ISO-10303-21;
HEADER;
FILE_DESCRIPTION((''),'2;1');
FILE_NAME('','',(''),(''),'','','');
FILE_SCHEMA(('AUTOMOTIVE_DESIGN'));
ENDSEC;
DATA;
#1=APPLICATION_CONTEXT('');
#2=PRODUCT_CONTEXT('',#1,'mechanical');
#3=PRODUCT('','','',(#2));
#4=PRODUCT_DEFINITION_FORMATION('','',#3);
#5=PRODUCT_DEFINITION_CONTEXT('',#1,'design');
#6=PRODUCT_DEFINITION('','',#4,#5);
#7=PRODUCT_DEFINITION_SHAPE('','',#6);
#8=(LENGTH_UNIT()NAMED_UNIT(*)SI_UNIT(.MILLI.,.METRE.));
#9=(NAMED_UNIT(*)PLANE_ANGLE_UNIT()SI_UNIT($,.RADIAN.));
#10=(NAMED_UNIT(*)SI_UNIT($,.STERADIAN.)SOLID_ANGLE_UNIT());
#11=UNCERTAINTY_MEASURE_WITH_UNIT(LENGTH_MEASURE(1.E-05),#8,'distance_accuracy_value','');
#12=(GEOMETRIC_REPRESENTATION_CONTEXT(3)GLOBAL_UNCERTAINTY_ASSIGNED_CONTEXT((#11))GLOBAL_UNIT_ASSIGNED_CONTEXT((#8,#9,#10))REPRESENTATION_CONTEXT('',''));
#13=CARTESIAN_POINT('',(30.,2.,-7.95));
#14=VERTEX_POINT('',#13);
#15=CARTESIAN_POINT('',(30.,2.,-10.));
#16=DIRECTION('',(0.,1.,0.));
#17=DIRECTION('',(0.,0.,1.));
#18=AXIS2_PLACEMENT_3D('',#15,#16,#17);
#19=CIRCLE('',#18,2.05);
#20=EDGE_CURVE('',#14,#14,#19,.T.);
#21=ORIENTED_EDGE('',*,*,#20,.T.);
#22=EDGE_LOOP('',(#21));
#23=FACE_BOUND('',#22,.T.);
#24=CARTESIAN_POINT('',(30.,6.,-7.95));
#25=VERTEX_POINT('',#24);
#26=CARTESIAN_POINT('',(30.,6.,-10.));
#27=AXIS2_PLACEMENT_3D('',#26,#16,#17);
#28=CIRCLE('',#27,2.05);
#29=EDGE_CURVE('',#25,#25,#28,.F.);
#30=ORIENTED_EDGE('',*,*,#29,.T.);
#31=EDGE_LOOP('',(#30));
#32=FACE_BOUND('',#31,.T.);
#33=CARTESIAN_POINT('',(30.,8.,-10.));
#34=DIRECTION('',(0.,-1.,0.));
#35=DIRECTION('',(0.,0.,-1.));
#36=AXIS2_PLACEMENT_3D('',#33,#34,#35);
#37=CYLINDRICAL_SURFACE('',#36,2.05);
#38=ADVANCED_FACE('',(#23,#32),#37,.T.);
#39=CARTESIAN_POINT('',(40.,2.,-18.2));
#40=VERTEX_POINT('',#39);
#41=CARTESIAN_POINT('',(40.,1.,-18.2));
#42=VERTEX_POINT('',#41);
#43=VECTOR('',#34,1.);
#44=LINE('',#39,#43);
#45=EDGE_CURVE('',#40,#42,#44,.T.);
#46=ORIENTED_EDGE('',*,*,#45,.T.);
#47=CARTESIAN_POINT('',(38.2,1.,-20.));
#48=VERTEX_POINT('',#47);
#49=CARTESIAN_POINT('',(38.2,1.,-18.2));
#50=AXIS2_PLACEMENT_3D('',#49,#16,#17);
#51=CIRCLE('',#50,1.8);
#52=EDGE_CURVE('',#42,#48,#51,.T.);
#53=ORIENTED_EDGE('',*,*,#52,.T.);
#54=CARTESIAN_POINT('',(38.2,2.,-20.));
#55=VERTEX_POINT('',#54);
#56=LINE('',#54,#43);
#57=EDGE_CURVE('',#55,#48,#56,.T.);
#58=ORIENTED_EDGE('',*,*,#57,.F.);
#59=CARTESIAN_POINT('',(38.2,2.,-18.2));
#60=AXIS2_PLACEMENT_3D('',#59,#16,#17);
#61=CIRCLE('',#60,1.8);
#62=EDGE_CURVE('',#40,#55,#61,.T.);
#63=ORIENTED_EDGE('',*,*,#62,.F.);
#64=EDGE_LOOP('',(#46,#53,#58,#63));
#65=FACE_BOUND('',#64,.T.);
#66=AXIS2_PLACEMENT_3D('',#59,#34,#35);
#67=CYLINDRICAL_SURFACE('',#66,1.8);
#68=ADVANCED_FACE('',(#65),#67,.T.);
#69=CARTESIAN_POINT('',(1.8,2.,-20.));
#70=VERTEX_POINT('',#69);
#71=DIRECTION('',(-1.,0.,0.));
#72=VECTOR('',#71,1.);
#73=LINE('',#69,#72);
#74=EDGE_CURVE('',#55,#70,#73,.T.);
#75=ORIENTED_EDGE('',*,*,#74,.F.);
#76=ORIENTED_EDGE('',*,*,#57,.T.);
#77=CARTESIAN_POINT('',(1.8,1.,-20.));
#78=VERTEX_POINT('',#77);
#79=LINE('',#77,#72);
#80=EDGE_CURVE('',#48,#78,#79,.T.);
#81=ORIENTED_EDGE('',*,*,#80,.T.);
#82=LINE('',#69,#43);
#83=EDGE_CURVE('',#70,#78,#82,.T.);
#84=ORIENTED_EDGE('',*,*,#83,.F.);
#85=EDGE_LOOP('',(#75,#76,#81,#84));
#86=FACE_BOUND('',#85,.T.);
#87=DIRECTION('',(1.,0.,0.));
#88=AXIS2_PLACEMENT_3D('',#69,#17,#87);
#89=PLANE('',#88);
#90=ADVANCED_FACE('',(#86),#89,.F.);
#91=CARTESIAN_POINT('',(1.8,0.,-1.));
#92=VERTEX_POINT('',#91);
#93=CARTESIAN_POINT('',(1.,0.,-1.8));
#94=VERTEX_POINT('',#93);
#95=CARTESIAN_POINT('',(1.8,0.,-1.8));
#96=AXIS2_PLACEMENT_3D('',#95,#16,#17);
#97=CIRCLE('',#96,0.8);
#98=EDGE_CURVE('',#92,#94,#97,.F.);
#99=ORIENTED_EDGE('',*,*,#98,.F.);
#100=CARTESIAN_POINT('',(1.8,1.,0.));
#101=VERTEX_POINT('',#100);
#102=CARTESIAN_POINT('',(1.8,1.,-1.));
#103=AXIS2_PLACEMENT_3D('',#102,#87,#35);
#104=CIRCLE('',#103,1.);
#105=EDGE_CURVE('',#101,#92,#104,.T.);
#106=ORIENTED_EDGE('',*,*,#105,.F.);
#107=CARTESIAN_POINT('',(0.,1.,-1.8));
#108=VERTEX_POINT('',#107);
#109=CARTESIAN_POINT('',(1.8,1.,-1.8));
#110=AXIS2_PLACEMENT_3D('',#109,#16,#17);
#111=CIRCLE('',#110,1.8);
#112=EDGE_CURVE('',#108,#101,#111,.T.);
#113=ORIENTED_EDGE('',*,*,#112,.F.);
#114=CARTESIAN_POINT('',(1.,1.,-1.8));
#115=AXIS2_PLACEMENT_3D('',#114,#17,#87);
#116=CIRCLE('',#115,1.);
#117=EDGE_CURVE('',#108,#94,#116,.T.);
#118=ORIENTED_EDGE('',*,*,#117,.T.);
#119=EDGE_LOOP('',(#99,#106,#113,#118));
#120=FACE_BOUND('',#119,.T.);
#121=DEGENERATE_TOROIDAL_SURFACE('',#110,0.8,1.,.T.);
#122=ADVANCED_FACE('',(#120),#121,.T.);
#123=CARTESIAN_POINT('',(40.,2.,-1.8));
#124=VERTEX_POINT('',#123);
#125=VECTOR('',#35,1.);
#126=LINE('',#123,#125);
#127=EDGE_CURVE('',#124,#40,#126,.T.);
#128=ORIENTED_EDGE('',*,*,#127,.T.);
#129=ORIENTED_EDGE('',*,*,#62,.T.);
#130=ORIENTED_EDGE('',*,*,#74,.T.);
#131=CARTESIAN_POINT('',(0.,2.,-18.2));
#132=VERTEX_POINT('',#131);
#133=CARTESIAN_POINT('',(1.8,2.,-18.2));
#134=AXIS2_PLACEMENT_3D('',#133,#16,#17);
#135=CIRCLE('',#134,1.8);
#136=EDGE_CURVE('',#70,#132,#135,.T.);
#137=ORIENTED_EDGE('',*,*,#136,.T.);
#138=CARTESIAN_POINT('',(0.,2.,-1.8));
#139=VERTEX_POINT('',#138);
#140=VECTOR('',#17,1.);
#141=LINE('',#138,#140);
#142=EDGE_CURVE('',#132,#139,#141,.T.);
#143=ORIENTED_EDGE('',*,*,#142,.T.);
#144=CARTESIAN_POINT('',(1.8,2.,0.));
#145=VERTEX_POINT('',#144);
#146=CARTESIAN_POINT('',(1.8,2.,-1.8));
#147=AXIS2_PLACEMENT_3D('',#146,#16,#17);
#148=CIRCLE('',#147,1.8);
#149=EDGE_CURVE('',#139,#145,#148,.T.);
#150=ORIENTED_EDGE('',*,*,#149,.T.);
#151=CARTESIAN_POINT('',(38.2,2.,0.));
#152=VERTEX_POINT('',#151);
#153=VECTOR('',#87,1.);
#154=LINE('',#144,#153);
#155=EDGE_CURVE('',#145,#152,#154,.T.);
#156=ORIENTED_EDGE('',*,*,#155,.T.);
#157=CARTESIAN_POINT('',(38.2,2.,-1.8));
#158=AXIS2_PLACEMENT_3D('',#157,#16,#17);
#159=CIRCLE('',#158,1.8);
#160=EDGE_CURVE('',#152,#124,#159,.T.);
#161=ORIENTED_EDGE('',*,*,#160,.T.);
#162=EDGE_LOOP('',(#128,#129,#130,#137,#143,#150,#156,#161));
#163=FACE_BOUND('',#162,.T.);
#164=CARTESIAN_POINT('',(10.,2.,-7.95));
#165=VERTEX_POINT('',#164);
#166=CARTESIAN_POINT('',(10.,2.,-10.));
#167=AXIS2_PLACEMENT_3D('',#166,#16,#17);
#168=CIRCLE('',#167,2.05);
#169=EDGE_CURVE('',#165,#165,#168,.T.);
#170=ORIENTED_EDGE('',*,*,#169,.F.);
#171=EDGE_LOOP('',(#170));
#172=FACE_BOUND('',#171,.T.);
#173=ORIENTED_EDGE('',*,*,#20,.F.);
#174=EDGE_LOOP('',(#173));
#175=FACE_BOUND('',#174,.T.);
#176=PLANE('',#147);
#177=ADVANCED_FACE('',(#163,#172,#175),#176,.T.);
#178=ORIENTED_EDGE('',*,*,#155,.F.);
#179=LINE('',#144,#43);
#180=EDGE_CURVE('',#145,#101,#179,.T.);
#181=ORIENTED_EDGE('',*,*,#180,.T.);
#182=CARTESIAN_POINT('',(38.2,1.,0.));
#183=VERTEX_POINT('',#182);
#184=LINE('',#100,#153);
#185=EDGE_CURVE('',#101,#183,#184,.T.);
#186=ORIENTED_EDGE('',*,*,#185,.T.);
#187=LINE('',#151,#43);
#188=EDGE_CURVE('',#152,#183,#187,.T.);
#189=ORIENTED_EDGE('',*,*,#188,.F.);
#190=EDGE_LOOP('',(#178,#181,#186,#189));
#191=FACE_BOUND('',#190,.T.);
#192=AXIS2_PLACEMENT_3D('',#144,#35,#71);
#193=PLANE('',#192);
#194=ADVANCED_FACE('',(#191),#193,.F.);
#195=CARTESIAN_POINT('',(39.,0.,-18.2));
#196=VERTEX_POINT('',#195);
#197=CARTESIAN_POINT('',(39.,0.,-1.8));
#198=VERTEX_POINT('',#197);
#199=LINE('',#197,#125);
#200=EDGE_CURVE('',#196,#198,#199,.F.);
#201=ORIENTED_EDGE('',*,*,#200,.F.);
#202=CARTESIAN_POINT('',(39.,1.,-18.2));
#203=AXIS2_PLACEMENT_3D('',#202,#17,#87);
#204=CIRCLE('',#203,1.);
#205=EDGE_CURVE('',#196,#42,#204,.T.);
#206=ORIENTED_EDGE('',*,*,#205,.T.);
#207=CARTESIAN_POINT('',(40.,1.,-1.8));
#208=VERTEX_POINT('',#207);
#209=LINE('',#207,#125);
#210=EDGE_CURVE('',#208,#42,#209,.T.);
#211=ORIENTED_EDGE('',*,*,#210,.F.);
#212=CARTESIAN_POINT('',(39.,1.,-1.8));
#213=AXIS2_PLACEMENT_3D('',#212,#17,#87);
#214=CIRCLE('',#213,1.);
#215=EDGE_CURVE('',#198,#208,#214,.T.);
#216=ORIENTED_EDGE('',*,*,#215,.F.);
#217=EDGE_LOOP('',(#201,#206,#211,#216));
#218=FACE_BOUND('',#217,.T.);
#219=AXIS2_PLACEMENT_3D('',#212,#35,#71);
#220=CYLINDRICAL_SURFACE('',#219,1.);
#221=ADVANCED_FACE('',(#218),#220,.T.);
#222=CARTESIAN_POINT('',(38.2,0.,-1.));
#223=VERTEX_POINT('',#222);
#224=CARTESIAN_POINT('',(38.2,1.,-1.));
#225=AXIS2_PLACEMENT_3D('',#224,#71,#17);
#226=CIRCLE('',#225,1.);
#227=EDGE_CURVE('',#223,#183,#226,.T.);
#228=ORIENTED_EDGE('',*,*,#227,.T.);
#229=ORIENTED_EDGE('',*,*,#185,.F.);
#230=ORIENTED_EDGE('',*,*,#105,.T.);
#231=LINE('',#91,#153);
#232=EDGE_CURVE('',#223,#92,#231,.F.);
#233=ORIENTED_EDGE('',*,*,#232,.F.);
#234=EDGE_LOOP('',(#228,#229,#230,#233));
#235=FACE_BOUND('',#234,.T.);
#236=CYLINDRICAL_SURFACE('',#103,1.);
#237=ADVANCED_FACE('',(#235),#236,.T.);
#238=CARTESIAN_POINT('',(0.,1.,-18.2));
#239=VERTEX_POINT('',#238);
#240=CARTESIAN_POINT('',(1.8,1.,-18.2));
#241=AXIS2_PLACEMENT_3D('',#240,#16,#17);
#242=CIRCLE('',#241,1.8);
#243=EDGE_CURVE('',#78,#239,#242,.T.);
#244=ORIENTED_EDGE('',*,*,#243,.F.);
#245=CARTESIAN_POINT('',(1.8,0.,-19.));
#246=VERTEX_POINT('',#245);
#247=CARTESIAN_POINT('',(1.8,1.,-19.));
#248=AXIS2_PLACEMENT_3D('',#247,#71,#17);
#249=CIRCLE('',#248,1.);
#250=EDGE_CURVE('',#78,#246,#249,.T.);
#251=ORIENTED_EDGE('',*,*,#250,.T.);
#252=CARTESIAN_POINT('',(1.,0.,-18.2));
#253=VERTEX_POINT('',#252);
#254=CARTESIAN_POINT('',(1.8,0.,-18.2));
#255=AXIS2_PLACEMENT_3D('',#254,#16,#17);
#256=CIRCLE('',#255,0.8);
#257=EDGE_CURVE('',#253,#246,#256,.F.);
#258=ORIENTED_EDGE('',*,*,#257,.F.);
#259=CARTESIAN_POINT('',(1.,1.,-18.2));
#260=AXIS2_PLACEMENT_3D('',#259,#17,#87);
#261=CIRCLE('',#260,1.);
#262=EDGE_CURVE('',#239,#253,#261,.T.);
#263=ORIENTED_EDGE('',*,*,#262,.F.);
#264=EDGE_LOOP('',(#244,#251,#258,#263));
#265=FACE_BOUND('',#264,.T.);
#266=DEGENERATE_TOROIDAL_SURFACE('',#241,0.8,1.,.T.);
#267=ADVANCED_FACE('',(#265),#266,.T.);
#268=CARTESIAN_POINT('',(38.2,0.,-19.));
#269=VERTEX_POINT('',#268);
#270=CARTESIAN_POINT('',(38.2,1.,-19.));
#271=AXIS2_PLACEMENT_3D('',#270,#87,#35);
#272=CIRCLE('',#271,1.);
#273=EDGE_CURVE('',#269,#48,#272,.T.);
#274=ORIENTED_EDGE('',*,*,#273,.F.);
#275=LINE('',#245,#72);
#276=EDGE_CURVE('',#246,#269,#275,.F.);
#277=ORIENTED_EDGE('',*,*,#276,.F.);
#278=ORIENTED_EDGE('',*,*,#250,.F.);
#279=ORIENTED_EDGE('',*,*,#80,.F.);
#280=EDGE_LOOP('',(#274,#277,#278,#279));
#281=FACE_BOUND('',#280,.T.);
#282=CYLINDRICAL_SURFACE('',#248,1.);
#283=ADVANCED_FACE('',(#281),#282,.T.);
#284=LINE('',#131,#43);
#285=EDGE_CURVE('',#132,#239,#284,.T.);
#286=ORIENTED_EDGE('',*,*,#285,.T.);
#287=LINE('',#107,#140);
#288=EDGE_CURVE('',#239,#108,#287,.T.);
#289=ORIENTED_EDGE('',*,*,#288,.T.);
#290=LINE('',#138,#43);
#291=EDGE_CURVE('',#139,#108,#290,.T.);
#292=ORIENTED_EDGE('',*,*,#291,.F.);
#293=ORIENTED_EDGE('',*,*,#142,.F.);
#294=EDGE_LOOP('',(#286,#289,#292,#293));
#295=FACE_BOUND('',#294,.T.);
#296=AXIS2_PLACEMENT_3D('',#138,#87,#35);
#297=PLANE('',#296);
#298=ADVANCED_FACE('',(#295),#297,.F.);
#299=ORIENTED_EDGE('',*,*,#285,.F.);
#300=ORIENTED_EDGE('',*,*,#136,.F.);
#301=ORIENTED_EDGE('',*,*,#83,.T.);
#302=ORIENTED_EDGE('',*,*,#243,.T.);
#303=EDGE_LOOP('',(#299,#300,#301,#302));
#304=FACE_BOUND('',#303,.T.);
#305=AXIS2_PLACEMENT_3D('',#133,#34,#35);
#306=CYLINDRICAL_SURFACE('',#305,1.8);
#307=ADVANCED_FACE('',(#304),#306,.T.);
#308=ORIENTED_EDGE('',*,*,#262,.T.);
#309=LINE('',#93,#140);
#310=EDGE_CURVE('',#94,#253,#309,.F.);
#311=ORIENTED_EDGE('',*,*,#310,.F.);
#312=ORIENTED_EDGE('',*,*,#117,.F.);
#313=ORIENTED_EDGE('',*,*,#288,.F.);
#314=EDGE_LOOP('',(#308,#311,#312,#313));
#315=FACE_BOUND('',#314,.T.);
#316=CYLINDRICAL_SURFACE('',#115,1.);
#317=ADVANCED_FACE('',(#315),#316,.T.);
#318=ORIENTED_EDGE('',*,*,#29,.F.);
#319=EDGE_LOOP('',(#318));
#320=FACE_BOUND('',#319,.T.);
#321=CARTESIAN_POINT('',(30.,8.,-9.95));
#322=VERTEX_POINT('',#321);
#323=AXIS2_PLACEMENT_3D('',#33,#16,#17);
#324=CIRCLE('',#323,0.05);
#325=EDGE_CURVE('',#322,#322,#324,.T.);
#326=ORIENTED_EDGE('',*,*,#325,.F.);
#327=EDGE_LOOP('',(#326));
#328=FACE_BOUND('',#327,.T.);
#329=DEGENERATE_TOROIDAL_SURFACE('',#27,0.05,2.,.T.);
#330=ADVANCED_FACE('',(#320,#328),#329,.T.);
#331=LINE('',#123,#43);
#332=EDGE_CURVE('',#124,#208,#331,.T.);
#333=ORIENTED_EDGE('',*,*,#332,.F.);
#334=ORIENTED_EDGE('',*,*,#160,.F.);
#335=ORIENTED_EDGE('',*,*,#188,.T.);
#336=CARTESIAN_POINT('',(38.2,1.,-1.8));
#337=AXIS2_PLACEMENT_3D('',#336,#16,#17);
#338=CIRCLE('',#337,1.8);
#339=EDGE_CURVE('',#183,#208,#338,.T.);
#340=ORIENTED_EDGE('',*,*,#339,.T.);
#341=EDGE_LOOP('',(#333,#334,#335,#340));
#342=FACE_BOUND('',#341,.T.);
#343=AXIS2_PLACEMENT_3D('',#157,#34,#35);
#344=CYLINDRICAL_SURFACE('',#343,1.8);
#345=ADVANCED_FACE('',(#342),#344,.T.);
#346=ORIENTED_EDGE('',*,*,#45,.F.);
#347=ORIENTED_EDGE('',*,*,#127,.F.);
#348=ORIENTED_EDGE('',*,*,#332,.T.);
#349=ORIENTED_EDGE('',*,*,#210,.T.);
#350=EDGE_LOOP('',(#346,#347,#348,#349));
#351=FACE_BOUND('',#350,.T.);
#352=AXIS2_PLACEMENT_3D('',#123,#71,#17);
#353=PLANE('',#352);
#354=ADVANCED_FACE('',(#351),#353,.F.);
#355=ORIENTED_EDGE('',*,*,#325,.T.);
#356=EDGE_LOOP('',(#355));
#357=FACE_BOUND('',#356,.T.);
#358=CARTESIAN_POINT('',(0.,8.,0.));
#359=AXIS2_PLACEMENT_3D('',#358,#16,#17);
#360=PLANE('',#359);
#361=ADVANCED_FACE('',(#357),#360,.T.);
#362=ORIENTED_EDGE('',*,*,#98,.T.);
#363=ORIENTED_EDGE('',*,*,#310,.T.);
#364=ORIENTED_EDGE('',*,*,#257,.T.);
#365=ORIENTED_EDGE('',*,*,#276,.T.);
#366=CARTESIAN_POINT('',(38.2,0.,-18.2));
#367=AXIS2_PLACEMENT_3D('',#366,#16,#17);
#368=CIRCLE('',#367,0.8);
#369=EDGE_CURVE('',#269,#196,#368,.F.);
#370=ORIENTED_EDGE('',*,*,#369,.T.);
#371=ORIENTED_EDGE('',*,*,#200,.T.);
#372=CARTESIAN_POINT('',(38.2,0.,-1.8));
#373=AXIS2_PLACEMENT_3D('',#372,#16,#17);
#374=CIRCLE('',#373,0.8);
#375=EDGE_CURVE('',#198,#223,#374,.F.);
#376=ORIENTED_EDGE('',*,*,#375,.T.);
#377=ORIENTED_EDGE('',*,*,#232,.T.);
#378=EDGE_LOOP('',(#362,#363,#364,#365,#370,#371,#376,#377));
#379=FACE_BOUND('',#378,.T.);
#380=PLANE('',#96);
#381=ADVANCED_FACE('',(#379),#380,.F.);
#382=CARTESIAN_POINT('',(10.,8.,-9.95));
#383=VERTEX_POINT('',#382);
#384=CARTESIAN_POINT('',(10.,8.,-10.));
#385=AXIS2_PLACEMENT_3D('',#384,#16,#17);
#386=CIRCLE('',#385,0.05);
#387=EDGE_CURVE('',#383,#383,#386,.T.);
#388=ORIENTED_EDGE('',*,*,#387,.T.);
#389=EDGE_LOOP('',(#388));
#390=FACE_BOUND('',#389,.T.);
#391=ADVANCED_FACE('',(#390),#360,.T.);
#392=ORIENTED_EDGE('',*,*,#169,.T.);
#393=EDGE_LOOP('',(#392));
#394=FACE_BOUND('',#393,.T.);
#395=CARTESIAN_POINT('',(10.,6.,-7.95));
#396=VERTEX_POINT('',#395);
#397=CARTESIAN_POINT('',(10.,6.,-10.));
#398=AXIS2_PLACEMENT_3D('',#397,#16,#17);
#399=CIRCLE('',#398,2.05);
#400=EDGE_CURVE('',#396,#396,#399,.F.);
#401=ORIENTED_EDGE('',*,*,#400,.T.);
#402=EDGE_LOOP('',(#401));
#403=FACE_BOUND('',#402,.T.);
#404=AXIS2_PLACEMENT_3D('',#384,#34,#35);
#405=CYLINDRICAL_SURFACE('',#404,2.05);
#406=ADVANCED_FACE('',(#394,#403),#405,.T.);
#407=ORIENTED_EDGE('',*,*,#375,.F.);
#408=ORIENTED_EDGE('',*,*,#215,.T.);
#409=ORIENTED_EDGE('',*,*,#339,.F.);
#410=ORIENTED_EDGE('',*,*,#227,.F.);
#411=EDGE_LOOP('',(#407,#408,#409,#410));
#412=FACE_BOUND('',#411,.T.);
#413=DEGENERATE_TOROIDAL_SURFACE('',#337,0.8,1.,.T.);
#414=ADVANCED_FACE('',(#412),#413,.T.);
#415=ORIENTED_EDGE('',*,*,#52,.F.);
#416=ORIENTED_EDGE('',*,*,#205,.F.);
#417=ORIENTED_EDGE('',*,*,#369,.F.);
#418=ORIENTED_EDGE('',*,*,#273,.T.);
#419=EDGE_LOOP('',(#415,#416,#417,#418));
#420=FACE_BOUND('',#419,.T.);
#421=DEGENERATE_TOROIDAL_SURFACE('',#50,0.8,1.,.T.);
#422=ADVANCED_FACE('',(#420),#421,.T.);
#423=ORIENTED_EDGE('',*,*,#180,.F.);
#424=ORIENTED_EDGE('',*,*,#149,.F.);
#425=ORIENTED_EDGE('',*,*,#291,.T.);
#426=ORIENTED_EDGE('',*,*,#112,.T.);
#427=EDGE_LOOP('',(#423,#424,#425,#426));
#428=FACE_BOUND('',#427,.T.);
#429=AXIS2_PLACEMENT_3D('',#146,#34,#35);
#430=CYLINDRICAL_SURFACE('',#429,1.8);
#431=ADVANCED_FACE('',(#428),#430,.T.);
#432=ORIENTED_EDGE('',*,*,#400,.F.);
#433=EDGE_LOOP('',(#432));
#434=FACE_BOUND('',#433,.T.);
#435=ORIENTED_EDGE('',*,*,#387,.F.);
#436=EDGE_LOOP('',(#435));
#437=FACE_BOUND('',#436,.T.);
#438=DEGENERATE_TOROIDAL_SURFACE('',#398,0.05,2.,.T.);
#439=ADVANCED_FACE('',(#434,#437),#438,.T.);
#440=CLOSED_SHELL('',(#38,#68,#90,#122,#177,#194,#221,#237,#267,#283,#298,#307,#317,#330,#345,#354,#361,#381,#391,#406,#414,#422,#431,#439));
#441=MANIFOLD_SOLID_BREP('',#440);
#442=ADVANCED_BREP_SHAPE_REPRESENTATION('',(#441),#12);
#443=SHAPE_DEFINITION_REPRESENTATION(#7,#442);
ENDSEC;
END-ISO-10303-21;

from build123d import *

# Parameters (mm, degrees)
SKETCH1_R           = 2.05
BOSS_EXTRUDE1_DEPTH = 2
SKETCH1_2_R         = 2.05
BOSS_EXTRUDE2_DEPTH = 8
FILLET1_R           = 2
FILLET2_R           = 1


with BuildPart() as part:
    # Sketch1 → Boss-Extrude1 (new body)
    with BuildSketch(Plane(origin=(0, 0, 0), x_dir=(1, 0, 0), z_dir=(0, 1, 0))):
        with BuildLine():
            Line((1.8, 0), (38.2, 0))
            ThreePointArc((38.2, 0), (39.472792206, 0.527207794), (40, 1.8))
            Line((40, 1.8), (40, 18.2))
            ThreePointArc((40, 18.2), (39.472792206, 19.472792206), (38.2, 20))
            Line((38.2, 20), (1.8, 20))
            ThreePointArc((1.8, 20), (0.527207794, 19.472792206), (0, 18.2))
            Line((0, 18.2), (0, 1.8))
            ThreePointArc((0, 1.8), (0.527207794, 0.527207794), (1.8, 0))
        make_face()
        with Locations((10, 10)):
            Circle(SKETCH1_R, mode=Mode.SUBTRACT)
        with Locations((30, 10)):
            Circle(SKETCH1_R, mode=Mode.SUBTRACT)
    extrude(amount=BOSS_EXTRUDE1_DEPTH)

    # Sketch1<2> → Boss-Extrude2 (add)
    with BuildSketch(Plane(origin=(0, 0, 0), x_dir=(1, 0, 0), z_dir=(0, 1, 0))):
        with Locations((30, 10)):
            Circle(SKETCH1_2_R)
        with Locations((10, 10)):
            Circle(SKETCH1_2_R)
    extrude(amount=BOSS_EXTRUDE2_DEPTH)

    # Fillet1
    fillet1_edges = [part.edges().sort_by_distance(p)[0] for p in [
        (7.95, 8, -10),
        (27.95, 8, -10),
    ]]
    fillet(fillet1_edges, radius=FILLET1_R)

    # Fillet2
    fillet2_edges = [part.edges().sort_by_distance(p)[0] for p in [
        (20, 0, 0),
        (39.472792206, 0, -0.527207794),
        (40, 0, -10),
        (39.472792206, 0, -19.472792206),
        (20, 0, -20),
        (0.527207794, 0, -19.472792206),
        (0, 0, -10),
        (0.527207794, 0, -0.527207794),
    ]]
    fillet(fillet2_edges, radius=FILLET2_R)


solid = part.part
